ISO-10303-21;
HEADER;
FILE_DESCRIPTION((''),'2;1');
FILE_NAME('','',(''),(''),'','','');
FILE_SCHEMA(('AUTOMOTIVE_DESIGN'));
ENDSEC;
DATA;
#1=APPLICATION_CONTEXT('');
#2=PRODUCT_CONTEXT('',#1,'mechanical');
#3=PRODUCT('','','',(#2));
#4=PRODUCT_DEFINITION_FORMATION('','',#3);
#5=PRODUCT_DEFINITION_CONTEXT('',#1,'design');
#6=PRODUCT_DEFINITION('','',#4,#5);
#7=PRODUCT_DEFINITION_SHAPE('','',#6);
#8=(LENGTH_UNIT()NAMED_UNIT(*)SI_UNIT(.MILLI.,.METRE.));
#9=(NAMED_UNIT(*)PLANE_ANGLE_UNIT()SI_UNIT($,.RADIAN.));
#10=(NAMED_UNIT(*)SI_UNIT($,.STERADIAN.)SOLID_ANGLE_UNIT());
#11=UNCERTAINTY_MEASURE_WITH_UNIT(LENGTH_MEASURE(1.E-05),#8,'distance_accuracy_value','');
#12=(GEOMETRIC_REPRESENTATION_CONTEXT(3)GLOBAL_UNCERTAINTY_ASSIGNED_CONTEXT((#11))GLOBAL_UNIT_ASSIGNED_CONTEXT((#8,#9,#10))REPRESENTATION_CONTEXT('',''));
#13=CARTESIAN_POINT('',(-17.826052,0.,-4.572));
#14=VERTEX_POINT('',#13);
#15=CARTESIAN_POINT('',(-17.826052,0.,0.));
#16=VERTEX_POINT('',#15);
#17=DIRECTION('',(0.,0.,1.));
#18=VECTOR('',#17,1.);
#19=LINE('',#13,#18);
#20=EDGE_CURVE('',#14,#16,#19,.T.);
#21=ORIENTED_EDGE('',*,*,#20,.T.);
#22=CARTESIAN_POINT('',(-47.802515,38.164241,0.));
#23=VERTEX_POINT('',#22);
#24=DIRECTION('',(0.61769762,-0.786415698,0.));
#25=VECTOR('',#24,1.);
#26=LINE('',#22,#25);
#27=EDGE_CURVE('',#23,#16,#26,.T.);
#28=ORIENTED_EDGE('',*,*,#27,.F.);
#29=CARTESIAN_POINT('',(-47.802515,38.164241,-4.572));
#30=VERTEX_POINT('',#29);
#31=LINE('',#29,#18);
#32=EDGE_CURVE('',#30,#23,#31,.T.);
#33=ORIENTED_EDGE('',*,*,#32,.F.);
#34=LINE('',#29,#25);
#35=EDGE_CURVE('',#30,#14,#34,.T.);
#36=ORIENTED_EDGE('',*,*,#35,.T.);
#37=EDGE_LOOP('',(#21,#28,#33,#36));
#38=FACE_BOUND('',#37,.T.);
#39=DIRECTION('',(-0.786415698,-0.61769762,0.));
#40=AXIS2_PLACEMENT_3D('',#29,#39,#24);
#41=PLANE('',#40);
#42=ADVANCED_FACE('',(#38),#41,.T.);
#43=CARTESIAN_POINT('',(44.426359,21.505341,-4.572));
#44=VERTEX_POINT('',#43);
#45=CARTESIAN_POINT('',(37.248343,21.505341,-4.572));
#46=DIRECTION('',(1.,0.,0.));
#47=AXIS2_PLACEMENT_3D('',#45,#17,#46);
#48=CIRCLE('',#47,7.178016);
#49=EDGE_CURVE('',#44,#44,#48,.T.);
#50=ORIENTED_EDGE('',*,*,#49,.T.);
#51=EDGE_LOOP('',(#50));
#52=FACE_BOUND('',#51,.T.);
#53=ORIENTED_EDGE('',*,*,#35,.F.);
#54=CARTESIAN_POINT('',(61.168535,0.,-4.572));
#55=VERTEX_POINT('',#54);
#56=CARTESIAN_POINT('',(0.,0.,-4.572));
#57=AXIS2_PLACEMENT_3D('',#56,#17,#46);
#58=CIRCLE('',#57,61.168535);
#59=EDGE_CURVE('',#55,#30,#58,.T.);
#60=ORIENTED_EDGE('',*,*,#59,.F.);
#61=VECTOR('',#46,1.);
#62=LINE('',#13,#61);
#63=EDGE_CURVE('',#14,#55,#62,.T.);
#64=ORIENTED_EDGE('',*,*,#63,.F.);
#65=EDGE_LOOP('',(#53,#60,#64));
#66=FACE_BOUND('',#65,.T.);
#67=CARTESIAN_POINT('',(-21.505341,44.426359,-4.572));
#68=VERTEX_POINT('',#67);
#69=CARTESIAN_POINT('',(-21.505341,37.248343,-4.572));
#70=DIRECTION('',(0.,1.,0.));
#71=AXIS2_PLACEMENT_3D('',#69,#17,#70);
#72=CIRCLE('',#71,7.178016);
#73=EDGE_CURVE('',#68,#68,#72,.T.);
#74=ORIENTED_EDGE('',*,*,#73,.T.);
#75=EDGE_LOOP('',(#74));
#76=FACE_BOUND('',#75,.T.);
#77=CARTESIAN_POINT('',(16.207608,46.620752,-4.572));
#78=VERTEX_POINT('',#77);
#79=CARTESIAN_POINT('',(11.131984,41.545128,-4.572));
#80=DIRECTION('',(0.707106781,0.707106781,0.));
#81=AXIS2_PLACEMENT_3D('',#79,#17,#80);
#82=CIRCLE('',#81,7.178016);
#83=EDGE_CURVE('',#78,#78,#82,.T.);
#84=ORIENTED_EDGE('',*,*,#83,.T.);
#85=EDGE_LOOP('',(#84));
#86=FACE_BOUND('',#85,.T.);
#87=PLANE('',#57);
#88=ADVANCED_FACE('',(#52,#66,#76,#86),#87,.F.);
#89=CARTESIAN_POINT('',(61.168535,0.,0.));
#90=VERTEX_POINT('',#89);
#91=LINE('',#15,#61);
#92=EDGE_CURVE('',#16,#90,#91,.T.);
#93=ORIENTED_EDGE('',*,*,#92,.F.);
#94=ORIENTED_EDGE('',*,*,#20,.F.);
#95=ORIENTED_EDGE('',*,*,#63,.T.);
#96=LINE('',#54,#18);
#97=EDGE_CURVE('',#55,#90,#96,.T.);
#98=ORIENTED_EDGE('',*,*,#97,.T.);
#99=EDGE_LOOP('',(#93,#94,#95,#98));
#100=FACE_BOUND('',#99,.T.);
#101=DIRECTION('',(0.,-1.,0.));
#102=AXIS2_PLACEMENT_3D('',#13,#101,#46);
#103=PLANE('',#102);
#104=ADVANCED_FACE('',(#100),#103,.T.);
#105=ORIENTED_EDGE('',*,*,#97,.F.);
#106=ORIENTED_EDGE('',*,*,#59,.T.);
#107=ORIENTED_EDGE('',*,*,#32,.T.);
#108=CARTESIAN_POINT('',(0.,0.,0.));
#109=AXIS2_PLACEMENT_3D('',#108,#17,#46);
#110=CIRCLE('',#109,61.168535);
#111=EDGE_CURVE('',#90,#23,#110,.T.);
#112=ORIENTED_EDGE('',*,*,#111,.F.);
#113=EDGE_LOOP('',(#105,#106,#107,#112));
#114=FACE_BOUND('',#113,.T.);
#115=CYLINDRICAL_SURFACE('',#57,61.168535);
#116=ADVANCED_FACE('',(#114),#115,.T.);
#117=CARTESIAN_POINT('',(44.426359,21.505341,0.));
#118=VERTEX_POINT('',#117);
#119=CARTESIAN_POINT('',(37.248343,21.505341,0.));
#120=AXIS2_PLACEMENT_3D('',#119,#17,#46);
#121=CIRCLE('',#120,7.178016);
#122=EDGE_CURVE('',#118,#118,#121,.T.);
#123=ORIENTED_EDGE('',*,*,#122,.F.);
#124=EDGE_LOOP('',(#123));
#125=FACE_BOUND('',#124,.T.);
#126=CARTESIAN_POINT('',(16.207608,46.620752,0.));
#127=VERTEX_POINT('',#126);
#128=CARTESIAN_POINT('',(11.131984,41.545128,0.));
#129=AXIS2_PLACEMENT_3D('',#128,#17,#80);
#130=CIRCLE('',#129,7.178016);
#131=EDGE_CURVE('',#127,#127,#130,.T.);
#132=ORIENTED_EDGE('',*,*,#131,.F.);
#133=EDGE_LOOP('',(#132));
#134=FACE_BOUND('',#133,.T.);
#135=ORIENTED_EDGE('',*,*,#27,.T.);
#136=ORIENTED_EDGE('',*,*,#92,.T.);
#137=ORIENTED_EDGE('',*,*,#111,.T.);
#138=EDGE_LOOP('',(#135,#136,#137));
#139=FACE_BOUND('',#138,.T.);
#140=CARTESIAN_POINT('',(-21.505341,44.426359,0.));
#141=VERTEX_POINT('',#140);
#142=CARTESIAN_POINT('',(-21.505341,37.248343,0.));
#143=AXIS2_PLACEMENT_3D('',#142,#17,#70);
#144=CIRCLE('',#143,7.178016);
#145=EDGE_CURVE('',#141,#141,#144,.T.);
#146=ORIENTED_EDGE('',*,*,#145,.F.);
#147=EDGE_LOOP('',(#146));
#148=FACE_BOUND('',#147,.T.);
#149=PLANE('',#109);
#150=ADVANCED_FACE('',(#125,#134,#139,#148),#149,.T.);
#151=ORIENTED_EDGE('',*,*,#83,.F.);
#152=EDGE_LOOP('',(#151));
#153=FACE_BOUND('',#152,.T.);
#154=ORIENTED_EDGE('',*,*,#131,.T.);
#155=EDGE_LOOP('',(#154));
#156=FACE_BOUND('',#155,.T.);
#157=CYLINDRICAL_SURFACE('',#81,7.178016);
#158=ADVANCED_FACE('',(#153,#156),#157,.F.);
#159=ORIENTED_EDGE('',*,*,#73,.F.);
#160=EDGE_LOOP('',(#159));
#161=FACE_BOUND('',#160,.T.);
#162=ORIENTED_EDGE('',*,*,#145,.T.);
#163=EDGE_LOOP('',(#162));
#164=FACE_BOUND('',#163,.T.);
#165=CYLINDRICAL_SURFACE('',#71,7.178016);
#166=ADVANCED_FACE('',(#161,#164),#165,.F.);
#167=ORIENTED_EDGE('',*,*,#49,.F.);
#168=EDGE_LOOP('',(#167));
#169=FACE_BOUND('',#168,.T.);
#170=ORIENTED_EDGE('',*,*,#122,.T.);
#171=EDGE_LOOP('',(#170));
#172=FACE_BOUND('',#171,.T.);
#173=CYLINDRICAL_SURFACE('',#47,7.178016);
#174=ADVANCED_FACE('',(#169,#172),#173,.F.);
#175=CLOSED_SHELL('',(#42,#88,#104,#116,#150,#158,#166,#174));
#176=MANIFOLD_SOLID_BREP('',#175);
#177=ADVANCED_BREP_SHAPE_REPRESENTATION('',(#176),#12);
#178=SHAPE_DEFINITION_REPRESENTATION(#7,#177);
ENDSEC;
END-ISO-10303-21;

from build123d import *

# Parameters (mm, degrees)
SKETCH1_R             = 7.178016374
EXTRUDE1_DEPTH        = 4.572
CIRPATTERN3_START     = -4.572
CIRPATTERN3_OUTLINE_R = 7.178016374
CIRPATTERN3_DEPTH     = 4.572


# Read off the part's stored shape, not the designer's step: CirPattern3
with BuildPart() as part:
    # Sketch1 → Extrude1 (new body)
    with BuildSketch(Plane.XY):
        with BuildLine():
            Line((-17.82605161, 0), (61.168535359, 0))
            ThreePointArc((61.168535359, 0), (20.218554782, 57.730405857), (-47.802514574, 38.164241357))
            Line((-47.802514574, 38.164241357), (-17.82605161, 0))
        make_face()
        with Locations((37.24834288, 21.505340789)):
            Circle(SKETCH1_R, mode=Mode.SUBTRACT)
    extrude(amount=-EXTRUDE1_DEPTH)

    # CirPattern3 outline → CirPattern3 (cut)
    with BuildSketch(Plane.XY.offset(CIRPATTERN3_START)):
        with Locations((-21.505340789, 37.24834288)):
            Circle(CIRPATTERN3_OUTLINE_R)
        with Locations((11.131983535, 41.545128142)):
            Circle(CIRPATTERN3_OUTLINE_R)
    extrude(amount=CIRPATTERN3_DEPTH, mode=Mode.SUBTRACT)


solid = part.part
